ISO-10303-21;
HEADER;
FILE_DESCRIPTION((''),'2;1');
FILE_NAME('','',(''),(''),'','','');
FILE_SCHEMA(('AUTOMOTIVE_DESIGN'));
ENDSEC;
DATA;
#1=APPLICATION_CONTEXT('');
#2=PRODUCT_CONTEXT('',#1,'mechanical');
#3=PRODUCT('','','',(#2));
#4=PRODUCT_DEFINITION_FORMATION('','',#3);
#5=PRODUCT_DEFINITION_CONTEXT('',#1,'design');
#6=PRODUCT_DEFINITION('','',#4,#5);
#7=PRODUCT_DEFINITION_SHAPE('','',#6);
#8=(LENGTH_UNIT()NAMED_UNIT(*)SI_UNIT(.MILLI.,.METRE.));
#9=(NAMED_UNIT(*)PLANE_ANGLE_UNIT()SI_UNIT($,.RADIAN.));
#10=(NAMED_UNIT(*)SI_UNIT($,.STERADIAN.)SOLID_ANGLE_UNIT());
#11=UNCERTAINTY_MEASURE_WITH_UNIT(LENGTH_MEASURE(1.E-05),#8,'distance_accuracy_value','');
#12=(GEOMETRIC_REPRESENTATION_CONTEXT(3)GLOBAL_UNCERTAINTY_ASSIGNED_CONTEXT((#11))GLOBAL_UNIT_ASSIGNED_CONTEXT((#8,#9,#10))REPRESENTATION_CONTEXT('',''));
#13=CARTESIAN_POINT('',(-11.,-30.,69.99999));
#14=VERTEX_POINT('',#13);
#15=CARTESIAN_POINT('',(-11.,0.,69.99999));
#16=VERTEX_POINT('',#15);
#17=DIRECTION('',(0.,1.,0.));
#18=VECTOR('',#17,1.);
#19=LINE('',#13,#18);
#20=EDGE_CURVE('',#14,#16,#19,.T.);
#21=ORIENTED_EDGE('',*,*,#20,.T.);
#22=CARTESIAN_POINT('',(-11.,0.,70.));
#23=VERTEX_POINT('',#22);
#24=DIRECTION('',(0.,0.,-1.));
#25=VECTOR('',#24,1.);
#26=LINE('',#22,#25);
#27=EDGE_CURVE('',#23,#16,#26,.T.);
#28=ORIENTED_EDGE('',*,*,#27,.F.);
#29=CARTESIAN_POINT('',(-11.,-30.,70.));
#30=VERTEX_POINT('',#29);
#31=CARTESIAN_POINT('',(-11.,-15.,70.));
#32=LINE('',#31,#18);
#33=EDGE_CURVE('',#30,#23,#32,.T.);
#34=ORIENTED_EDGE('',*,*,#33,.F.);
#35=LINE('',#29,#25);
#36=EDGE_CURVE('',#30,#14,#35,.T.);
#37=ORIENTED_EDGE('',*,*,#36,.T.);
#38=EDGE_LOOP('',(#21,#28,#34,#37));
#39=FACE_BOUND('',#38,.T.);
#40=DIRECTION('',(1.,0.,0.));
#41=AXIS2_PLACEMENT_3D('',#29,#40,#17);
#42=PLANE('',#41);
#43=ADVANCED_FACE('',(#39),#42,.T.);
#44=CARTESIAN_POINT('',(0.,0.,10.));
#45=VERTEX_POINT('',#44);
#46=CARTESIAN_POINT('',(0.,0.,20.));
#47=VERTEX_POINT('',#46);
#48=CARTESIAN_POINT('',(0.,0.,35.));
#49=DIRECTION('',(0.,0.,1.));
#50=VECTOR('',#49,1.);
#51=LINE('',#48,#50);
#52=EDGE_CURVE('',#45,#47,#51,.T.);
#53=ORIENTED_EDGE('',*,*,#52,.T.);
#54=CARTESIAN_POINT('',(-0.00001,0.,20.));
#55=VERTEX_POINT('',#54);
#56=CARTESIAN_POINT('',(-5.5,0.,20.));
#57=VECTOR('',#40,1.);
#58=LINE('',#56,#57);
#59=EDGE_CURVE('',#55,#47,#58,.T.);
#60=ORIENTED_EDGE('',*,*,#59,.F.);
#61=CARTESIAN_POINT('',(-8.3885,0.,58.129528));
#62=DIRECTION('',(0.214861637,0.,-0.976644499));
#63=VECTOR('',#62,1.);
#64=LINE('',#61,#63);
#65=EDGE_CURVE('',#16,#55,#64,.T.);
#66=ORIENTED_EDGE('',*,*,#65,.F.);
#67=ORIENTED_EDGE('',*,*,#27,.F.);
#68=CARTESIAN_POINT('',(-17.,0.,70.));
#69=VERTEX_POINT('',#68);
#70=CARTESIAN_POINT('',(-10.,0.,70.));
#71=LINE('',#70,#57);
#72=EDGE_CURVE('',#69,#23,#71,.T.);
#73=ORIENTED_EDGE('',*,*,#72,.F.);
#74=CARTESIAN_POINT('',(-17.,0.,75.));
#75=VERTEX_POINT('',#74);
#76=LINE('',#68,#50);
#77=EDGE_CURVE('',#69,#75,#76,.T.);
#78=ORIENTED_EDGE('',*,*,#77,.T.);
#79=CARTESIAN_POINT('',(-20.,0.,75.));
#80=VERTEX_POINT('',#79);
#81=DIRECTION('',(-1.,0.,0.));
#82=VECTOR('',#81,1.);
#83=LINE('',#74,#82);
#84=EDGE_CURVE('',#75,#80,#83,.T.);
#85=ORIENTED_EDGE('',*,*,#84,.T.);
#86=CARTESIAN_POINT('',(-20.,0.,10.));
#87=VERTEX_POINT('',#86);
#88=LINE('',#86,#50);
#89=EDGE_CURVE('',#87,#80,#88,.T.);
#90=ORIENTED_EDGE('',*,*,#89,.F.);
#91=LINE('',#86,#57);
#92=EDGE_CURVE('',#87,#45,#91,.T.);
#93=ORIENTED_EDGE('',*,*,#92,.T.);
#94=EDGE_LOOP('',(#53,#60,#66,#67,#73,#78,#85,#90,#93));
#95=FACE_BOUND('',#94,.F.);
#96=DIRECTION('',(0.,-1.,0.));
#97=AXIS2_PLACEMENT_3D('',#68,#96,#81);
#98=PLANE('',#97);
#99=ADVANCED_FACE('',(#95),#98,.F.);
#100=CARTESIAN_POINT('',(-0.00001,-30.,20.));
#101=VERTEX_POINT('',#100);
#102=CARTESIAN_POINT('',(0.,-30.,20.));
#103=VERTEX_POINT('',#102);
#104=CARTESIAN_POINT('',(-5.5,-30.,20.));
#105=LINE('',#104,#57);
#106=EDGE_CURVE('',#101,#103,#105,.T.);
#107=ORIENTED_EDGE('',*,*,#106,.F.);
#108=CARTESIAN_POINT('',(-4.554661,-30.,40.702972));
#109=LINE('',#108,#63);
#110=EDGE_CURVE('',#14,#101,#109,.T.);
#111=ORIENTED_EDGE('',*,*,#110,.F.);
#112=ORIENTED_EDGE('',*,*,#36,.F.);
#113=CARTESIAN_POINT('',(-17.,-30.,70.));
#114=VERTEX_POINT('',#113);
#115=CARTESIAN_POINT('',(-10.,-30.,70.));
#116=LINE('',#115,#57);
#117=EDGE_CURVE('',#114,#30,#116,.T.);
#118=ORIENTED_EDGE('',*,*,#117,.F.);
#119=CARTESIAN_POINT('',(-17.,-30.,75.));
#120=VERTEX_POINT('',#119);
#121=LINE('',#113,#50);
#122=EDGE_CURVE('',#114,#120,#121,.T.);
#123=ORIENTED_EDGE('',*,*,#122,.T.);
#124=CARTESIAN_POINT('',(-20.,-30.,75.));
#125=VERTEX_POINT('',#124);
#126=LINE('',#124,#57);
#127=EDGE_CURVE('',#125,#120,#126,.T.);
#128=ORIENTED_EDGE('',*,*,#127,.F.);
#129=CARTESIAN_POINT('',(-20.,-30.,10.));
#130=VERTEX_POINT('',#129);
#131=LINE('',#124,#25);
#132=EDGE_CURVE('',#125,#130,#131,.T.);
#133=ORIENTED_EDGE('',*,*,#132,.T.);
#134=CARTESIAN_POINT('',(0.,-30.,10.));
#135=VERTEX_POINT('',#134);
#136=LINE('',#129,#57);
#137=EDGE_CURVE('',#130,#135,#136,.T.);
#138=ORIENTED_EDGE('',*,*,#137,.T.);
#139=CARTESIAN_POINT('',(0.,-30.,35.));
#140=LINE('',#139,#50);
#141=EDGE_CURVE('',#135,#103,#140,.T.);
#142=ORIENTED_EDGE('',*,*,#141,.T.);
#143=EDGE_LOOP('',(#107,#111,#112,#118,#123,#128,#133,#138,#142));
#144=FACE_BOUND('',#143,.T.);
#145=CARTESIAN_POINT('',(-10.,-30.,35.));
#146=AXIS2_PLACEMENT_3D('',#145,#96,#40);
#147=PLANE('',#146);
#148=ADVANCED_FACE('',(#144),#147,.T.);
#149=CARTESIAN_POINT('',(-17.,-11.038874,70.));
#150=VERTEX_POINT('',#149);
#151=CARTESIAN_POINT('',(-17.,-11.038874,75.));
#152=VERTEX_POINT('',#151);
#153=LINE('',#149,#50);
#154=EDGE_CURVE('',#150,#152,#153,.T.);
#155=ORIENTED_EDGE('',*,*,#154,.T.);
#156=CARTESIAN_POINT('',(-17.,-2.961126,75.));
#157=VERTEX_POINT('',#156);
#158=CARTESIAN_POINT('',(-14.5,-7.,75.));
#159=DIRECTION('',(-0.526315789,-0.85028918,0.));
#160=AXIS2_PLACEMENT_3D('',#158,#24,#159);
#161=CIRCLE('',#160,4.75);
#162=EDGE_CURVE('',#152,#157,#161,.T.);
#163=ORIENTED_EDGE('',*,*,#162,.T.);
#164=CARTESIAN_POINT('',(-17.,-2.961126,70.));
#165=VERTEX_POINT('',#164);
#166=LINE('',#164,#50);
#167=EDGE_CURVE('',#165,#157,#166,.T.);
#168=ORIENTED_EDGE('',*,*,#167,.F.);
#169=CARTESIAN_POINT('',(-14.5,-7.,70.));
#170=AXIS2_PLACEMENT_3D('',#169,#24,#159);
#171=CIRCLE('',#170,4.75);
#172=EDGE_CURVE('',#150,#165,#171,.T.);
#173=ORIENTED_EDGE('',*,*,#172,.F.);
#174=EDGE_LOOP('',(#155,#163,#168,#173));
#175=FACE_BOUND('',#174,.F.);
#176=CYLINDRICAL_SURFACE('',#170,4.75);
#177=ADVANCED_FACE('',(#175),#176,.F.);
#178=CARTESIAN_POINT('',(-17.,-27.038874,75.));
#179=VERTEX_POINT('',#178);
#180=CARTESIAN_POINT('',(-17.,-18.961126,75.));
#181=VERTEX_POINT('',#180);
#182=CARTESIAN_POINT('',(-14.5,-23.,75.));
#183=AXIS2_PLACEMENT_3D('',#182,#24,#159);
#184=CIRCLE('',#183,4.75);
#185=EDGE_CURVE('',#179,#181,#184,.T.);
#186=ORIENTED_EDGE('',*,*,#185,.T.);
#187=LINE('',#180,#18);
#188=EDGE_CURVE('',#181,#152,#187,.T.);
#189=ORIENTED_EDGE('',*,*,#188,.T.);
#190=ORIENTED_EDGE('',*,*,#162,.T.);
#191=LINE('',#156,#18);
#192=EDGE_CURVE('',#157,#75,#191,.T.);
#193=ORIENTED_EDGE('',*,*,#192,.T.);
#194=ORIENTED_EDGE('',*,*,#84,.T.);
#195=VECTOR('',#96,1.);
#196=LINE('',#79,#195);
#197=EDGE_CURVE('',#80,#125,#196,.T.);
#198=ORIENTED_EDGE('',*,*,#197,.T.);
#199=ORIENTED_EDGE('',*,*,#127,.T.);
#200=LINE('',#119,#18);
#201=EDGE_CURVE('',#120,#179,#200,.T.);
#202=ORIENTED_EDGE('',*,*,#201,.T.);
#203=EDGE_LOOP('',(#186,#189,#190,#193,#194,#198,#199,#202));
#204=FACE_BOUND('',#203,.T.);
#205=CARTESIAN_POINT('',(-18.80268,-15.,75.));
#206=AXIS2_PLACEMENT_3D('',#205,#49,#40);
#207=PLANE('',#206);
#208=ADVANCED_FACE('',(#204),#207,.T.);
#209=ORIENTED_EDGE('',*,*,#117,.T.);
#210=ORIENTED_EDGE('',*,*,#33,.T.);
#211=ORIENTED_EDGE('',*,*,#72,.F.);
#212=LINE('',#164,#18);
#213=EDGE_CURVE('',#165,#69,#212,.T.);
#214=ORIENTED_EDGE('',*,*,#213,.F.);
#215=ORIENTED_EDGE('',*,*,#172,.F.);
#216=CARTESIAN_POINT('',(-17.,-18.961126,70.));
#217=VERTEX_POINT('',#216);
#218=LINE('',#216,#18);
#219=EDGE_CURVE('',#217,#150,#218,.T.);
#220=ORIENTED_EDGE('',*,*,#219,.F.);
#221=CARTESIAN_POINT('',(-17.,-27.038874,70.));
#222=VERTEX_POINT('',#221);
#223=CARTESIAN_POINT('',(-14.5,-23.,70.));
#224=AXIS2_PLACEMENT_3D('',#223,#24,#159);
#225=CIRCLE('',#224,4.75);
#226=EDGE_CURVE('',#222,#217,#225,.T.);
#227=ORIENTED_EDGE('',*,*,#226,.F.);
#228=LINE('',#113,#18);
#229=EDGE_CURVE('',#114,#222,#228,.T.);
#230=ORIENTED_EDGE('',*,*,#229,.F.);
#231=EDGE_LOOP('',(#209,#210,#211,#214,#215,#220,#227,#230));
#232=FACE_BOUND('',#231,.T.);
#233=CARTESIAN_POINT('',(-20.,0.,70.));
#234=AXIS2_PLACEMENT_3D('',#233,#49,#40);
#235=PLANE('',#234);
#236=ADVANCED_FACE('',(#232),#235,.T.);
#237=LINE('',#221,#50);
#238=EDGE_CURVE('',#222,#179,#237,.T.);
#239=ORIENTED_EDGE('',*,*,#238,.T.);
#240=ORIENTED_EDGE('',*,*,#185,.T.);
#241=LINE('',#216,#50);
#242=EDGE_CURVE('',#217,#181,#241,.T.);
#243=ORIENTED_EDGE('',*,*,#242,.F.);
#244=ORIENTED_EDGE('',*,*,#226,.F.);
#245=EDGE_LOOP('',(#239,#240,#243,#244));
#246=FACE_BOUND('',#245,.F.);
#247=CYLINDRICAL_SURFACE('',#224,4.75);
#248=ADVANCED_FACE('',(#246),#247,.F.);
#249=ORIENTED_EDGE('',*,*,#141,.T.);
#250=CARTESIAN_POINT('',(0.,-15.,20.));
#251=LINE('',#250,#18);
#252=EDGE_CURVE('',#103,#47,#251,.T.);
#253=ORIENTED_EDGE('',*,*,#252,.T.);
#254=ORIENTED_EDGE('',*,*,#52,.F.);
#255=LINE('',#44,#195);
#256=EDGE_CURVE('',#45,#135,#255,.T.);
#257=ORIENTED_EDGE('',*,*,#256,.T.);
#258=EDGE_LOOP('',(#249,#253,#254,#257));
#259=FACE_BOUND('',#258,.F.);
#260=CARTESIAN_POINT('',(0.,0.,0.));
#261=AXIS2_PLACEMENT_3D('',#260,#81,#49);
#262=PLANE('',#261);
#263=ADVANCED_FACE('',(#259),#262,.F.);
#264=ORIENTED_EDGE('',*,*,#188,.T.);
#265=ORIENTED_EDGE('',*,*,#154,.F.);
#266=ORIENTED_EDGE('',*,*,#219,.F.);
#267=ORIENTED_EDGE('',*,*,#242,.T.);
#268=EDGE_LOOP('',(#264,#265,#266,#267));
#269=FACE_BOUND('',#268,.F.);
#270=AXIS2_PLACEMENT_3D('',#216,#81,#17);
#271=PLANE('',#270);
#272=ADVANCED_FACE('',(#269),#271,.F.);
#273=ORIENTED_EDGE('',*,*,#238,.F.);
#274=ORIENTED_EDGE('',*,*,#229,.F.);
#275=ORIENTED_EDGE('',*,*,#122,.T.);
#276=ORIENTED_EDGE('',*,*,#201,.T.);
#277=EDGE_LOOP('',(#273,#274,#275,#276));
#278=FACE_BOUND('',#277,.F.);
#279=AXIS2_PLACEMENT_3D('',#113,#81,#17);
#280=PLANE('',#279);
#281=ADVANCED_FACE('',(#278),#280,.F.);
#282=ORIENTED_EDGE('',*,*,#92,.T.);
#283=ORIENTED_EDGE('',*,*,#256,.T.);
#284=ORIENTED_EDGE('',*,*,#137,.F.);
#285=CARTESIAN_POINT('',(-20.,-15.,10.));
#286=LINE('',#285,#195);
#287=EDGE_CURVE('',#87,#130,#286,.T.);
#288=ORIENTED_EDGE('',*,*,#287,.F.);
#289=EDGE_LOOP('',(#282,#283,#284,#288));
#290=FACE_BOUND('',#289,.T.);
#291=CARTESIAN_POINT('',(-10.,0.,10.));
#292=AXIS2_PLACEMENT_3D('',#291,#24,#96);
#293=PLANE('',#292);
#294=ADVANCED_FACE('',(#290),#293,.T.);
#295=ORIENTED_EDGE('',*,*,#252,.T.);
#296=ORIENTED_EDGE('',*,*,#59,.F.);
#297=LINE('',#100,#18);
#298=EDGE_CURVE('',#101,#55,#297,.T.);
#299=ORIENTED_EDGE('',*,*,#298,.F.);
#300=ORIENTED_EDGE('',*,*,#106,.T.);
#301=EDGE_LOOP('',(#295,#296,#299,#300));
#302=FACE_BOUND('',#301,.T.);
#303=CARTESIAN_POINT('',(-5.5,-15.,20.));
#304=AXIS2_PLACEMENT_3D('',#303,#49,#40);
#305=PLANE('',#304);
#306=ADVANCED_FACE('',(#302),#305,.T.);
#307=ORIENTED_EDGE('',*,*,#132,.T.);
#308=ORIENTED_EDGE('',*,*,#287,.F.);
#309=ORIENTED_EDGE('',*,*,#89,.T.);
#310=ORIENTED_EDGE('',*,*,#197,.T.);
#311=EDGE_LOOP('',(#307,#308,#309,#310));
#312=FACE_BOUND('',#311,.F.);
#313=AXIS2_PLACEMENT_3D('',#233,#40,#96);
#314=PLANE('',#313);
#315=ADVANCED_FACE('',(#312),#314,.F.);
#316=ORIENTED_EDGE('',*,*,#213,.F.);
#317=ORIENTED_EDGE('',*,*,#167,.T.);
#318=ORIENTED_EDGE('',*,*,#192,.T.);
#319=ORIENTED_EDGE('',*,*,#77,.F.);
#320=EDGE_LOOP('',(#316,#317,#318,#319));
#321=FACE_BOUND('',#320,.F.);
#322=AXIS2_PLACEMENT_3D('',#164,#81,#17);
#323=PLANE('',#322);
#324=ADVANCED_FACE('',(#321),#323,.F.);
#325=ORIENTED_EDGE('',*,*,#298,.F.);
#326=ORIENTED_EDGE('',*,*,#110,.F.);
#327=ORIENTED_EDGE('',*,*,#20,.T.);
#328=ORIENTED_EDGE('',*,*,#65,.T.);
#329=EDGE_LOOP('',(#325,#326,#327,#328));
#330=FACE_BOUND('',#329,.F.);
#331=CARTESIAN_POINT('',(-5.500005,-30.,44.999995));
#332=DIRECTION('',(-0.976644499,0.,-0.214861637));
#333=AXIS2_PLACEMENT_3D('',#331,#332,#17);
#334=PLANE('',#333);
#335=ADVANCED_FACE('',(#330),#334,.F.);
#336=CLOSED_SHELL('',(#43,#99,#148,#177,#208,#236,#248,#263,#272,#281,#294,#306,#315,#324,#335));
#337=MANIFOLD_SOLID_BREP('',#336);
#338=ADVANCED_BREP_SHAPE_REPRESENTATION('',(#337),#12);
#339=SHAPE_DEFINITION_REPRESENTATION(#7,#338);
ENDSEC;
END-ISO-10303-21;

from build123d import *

# Parameters (mm, degrees)
F0_W      = 20
F0_H      = 70
F1_DEPTH  = 30
F2_W      = 30
F2_H      = 10
F3_DEPTH  = 10
F4_R      = 2.05
F5_DEPTH  = 10
F6_W      = 11
F6_H      = 30
F7_DEPTH  = 50
F9_DEPTH  = 5
F10_SIZE2 = 10.99999
F10_SIZE  = 49.99999
F11_W     = 30
F11_H     = 10
F12_DEPTH = 25


# Not quite as in the source:
# - a fillet or chamfer is up to 0.001 mm smaller than in the source, because OpenCascade refuses the exact size


with BuildPart() as f1:
    # F0 (on Front) → F1 (new body)
    with BuildSketch(Plane.XZ):
        with Locations((-10, 35)):
            Rectangle(F0_W, F0_H)
    extrude(amount=F1_DEPTH)

    # F2 (on face) → F3 (cut)
    with BuildSketch(Plane(origin=(-20, 0, 0), x_dir=(0, -1, 0), z_dir=(-1, 0, 0))):
        with Locations((15, 5)):
            Rectangle(F2_W, F2_H)
    extrude(amount=-F3_DEPTH, mode=Mode.SUBTRACT)

    # F4 (on face) → F5 (cut, through all)
    with BuildSketch(Plane(origin=(-10, 0, 0), x_dir=(0, -1, 0), z_dir=(-1, 0, 0))):
        with Locations((5, 5)):
            Circle(F4_R)
        with Locations((25, 5)):
            Circle(F4_R)
    extrude(amount=-F5_DEPTH, mode=Mode.SUBTRACT)

    # F6 (on face) → F7 (cut)
    with BuildSketch(Plane.XY.offset(70)):
        with Locations((-5.5, -15)):
            Rectangle(F6_W, F6_H)
    extrude(amount=-F7_DEPTH, mode=Mode.SUBTRACT)

    # F8 (on face) → F9 (join)
    with BuildSketch(Plane.XY.offset(70)):
        with BuildLine():
            ThreePointArc((-17, -11.0388736054), (-19.25, -7), (-17, -2.9611263946))
            Line((-17, -2.9611263946), (-17, 0))
            Line((-17, 0), (-20, 0))
            Line((-20, 0), (-20, -30))
            Line((-20, -30), (-17, -30))
            Line((-17, -30), (-17, -27.0388736054))
            ThreePointArc((-17, -27.0388736054), (-19.25, -23), (-17, -18.9611263946))
            Line((-17, -18.9611263946), (-17, -11.0388736054))
        make_face()
    extrude(amount=F9_DEPTH)

    # F10 (size 50 and 11 in the source; OpenCascade refuses exactly that, so slightly less here)
    f10_edges = [f1.edges().sort_by_distance(p)[0] for p in [
        (-11, -15, 20),
    ]]
    f10_side = f1.faces().sort_by_distance((-11, -15, 45))[0]
    chamfer(f10_edges, length=F10_SIZE, length2=F10_SIZE2, reference=f10_side)

    # F11 (on face) → F12 (cut)
    with BuildSketch(Plane(origin=(-10, 0, 0), x_dir=(0, -1, 0), z_dir=(-1, 0, 0))):
        with Locations((15, 5)):
            Rectangle(F11_W, F11_H)
    extrude(amount=-F12_DEPTH, mode=Mode.SUBTRACT)


solid = f1.part
